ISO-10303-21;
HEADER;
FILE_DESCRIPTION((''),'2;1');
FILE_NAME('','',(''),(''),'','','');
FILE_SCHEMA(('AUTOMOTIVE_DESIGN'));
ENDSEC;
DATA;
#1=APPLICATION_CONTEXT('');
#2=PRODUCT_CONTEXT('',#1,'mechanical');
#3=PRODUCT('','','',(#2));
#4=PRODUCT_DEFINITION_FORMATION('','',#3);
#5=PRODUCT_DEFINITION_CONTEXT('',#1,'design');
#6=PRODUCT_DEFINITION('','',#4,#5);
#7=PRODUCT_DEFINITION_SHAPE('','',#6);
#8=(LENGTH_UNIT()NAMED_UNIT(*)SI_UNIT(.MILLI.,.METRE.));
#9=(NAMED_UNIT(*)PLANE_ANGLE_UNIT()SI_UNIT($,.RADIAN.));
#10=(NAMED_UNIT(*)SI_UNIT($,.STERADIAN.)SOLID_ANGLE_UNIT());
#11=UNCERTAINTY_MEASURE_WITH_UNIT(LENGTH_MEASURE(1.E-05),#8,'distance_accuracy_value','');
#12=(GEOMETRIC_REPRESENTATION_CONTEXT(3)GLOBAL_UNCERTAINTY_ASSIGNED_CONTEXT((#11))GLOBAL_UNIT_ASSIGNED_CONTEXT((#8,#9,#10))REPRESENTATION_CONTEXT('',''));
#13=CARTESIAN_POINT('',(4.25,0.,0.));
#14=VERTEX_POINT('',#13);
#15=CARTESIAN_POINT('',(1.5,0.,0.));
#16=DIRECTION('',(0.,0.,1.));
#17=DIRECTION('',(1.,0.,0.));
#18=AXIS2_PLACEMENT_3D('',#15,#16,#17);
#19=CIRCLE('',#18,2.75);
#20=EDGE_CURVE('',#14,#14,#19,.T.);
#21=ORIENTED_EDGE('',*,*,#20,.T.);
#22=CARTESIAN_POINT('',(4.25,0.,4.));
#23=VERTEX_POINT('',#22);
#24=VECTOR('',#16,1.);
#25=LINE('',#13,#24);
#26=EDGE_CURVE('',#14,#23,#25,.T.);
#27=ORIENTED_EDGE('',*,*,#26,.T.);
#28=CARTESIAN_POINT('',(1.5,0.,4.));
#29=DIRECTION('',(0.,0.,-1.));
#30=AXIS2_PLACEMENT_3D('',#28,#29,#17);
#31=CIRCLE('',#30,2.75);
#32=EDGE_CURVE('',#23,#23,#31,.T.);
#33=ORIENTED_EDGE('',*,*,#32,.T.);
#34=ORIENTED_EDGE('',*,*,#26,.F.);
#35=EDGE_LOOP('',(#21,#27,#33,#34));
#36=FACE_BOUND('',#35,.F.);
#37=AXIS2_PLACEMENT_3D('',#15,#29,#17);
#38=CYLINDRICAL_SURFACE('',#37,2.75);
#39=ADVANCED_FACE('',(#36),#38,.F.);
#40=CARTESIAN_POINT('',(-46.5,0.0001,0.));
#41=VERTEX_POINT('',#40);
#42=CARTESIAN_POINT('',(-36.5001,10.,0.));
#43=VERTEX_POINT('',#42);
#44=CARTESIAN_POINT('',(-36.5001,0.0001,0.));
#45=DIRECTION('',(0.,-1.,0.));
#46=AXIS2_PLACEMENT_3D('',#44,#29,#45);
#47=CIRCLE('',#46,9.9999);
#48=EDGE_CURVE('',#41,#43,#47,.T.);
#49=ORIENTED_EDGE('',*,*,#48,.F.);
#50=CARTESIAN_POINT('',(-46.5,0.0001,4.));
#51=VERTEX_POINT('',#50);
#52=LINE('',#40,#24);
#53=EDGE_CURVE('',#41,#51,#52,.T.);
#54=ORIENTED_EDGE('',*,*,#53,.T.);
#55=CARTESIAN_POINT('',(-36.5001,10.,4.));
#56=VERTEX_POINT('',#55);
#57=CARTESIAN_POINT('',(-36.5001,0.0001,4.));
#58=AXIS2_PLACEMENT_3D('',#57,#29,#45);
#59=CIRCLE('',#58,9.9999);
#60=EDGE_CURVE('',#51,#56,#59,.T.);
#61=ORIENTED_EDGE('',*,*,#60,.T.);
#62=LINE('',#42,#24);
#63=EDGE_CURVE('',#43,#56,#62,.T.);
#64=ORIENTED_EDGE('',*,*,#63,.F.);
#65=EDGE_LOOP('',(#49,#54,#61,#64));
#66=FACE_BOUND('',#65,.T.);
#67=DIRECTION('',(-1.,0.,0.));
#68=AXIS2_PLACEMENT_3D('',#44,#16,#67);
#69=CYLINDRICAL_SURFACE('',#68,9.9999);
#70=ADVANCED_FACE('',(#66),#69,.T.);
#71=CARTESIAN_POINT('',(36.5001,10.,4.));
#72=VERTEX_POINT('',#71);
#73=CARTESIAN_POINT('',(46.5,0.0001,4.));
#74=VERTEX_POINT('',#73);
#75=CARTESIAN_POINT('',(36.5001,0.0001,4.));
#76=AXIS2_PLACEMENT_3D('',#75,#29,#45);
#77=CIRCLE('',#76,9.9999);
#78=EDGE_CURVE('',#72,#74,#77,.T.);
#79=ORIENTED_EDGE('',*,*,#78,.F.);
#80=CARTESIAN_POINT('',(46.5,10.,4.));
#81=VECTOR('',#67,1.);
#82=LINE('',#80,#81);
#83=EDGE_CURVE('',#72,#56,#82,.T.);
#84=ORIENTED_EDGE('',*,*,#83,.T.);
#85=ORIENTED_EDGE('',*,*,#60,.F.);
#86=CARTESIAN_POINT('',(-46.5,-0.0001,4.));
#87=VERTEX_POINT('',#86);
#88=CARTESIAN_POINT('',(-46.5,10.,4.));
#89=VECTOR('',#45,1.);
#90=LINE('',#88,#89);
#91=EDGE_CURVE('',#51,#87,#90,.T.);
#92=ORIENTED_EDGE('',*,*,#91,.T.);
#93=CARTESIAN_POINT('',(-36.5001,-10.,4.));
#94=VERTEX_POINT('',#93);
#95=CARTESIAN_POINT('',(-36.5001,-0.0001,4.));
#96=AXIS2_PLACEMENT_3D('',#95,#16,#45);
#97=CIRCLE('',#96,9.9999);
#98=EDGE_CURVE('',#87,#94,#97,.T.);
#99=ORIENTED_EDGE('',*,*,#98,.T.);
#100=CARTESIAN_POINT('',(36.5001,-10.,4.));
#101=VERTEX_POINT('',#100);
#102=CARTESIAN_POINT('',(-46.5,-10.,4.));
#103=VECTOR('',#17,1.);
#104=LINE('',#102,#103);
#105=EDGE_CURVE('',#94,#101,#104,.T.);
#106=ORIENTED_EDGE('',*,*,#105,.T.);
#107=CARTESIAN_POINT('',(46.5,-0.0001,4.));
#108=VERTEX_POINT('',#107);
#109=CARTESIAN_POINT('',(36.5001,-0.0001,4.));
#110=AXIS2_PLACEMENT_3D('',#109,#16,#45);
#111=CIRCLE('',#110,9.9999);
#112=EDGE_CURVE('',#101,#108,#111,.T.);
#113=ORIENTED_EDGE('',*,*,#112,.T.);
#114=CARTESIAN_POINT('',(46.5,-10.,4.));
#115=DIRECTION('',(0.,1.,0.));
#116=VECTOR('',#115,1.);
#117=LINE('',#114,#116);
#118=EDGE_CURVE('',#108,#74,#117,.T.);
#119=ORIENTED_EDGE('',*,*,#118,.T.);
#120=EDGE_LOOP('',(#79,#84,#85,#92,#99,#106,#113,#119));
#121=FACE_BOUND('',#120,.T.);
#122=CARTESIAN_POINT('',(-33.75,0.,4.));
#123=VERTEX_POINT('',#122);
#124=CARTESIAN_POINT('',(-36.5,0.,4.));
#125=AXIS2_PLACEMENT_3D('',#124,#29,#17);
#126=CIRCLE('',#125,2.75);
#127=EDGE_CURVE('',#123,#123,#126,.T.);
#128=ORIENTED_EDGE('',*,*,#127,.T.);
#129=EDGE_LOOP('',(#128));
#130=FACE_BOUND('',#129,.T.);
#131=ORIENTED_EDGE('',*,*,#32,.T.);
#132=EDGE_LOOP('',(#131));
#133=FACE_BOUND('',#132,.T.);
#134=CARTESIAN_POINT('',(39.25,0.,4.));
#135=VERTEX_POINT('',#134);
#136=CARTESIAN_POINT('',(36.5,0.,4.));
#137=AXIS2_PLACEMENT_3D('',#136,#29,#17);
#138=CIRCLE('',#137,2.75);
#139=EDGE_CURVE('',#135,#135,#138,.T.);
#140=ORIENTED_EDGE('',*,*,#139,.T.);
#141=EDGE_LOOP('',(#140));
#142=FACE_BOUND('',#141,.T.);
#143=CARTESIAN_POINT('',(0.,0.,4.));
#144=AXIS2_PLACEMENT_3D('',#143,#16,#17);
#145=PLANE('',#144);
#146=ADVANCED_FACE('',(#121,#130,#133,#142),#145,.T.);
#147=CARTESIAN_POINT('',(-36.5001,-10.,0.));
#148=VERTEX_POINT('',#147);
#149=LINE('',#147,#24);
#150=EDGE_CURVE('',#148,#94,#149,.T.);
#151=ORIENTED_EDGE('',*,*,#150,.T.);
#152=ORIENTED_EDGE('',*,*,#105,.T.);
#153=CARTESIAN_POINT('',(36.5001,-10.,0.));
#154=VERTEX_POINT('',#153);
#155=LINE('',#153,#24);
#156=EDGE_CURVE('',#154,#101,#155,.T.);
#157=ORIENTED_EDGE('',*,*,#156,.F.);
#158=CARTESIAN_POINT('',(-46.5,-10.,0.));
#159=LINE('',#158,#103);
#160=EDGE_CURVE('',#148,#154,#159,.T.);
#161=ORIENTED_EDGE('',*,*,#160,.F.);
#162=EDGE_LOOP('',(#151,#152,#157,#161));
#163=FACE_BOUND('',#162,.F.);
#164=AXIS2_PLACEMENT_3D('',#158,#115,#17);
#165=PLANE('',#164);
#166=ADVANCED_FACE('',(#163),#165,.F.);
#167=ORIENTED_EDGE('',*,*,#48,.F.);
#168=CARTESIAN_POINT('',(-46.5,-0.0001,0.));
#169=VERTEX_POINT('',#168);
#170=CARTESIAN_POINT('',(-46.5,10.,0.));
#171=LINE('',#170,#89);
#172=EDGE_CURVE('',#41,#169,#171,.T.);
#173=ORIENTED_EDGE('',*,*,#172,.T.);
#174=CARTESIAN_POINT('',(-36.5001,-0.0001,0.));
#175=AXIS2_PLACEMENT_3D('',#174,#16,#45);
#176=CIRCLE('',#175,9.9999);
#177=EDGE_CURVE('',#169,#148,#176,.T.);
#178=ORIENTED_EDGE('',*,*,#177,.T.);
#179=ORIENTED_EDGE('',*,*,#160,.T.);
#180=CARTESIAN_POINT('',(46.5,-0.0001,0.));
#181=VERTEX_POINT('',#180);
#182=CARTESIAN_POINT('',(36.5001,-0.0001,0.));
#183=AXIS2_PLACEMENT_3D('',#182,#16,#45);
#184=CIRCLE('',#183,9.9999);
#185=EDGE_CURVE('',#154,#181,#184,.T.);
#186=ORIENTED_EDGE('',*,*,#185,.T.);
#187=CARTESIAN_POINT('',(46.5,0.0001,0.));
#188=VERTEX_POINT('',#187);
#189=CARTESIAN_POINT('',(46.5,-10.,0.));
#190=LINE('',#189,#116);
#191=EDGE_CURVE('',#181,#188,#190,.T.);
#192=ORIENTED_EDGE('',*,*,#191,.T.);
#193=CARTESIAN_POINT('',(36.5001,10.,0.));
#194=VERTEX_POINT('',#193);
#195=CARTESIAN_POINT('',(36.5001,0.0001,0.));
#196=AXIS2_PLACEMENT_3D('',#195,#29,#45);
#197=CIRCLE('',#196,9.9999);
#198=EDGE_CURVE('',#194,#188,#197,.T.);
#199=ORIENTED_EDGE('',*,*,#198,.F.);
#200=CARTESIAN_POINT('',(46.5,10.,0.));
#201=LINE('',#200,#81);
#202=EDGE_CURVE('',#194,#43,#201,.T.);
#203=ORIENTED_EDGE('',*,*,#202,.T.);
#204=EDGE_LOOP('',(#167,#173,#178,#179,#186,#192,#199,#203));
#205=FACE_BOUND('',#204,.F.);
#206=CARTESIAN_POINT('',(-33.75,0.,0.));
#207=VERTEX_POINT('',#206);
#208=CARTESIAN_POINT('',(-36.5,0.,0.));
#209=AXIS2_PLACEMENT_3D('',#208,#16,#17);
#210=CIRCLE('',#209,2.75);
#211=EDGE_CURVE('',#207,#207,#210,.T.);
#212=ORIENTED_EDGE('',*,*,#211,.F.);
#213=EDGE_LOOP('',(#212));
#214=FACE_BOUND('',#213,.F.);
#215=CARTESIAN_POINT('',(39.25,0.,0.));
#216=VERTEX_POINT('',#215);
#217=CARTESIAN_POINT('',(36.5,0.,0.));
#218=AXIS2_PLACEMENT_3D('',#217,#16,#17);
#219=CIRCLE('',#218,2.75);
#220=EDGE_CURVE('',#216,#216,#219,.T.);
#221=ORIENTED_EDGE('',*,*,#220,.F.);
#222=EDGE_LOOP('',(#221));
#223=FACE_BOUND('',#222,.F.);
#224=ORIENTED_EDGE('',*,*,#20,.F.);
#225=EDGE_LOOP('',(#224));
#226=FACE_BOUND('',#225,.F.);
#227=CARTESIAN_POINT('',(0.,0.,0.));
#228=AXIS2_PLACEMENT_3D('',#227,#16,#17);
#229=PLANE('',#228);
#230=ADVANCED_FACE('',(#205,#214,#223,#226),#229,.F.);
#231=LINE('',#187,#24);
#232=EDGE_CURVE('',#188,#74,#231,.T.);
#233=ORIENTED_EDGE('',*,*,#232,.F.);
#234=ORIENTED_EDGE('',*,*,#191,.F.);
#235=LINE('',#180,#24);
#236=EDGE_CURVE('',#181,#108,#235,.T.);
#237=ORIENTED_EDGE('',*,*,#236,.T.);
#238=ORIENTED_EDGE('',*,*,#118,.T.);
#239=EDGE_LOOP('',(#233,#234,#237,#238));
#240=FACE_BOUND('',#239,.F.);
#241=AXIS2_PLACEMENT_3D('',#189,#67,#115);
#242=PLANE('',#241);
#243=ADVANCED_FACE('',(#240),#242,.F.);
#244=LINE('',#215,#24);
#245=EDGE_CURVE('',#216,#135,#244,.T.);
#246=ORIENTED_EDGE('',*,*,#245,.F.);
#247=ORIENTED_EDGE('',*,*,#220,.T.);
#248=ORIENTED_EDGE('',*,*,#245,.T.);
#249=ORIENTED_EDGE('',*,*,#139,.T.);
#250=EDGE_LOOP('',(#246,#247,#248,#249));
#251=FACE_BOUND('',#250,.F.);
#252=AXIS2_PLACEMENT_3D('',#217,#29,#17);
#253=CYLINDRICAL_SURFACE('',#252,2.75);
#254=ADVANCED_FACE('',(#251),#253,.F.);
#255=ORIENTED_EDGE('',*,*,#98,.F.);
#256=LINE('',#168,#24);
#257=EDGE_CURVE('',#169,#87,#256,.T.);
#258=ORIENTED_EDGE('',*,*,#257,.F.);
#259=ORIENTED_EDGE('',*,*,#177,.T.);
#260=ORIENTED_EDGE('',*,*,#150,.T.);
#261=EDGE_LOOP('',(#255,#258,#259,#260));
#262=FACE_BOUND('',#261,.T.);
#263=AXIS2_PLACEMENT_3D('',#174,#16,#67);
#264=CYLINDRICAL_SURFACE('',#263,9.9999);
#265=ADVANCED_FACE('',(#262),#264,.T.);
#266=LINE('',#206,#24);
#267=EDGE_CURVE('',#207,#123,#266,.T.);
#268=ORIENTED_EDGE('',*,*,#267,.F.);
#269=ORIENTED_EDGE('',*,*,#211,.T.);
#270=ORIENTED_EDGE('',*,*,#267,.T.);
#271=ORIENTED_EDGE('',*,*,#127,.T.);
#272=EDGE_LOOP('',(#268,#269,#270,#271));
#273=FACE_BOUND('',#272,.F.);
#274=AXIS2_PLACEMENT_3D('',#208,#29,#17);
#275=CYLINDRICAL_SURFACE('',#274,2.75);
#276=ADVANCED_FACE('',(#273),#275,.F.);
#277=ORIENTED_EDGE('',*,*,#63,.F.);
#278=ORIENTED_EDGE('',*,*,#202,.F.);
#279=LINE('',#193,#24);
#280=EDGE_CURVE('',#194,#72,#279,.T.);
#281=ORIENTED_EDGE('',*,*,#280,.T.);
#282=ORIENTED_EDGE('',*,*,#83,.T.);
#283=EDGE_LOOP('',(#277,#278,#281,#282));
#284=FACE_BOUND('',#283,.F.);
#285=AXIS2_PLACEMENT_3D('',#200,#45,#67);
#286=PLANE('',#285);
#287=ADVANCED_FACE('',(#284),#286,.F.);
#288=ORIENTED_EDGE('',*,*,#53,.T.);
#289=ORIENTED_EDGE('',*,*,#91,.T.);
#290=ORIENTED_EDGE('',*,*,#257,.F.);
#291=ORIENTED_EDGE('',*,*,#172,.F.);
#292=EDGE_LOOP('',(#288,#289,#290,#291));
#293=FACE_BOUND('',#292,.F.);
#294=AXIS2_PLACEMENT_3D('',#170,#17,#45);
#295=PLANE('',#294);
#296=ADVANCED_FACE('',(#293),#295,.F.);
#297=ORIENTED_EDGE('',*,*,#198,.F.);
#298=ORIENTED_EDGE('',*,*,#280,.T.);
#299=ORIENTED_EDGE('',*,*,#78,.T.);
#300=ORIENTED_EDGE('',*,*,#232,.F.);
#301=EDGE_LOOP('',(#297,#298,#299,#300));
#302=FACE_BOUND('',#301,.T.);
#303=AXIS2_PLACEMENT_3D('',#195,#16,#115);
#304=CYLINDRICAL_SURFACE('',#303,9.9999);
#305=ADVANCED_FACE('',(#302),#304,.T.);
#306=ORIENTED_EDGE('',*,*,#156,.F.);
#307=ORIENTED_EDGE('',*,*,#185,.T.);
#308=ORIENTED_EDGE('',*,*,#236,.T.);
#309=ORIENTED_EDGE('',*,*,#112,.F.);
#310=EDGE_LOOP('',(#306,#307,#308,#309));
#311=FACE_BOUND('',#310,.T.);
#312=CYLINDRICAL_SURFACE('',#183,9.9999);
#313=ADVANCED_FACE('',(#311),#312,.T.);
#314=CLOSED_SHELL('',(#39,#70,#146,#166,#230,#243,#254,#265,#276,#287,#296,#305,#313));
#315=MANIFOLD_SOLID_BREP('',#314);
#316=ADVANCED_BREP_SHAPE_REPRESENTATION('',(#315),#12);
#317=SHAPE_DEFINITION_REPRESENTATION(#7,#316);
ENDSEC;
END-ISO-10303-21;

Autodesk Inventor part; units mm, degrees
ref_plane "YZ Plane" through (0, 0, 0) normal (1, 0, 0) x (0, 1, 0)
ref_plane "XZ Plane" through (0, 0, 0) normal (0, 1, 0) x (-1, 0, 0)
ref_plane "XY Plane" through (0, 0, 0) normal (0, 0, 1) x (1, 0, 0)
sketch "Sketch1" plane through (0, 0, 0) normal (0, 0, 1) x (1, 0, 0)
  line L0 (-46.5, -10) -> (46.5, -10)
  line L1 (46.5, -10) -> (46.5, 10)
  line L2 (46.5, 10) -> (-46.5, 10)
  line L3 (-46.5, 10) -> (-46.5, -10)
  line L4 (-46.5, -10) -> (46.5, 10) construction
  line L5 (46.5, -10) -> (-46.5, 10) construction
  line L6 (0, 0) -> (-57.93, 0) construction
  circle A0 centre (-36.5, 0) radius 2.75
  line L7 (0, 0) -> (0, 23.3519) construction
  circle A1 centre (36.5, 0) radius 2.75
  circle A2 centre (1.5, 0) radius 2.75
  dimension "d0" = 93
  dimension "d1" = 20
  dimension "d5" = 5.5
  dimension "d6" = 10
  dimension "d9" = 5.5
  dimension "d11" = 35
extrude "Extrusion1" add sketch "Sketch1" along normal blind 4 contours L3 L2 L1 L0 | A0 | A1 | A2
fillet "Fillet1" radius 10 4 edges at (-46.5, 10, 2) (-46.5, -10, 2) (46.5, 10, 2) (46.5, -10, 2)
extrude "Extrusion2" cut sketch "Sketch1" along normal through all contours A0 | A1 | A2
equation "\"d9\" = d5"
properties part number "encoder_link"
